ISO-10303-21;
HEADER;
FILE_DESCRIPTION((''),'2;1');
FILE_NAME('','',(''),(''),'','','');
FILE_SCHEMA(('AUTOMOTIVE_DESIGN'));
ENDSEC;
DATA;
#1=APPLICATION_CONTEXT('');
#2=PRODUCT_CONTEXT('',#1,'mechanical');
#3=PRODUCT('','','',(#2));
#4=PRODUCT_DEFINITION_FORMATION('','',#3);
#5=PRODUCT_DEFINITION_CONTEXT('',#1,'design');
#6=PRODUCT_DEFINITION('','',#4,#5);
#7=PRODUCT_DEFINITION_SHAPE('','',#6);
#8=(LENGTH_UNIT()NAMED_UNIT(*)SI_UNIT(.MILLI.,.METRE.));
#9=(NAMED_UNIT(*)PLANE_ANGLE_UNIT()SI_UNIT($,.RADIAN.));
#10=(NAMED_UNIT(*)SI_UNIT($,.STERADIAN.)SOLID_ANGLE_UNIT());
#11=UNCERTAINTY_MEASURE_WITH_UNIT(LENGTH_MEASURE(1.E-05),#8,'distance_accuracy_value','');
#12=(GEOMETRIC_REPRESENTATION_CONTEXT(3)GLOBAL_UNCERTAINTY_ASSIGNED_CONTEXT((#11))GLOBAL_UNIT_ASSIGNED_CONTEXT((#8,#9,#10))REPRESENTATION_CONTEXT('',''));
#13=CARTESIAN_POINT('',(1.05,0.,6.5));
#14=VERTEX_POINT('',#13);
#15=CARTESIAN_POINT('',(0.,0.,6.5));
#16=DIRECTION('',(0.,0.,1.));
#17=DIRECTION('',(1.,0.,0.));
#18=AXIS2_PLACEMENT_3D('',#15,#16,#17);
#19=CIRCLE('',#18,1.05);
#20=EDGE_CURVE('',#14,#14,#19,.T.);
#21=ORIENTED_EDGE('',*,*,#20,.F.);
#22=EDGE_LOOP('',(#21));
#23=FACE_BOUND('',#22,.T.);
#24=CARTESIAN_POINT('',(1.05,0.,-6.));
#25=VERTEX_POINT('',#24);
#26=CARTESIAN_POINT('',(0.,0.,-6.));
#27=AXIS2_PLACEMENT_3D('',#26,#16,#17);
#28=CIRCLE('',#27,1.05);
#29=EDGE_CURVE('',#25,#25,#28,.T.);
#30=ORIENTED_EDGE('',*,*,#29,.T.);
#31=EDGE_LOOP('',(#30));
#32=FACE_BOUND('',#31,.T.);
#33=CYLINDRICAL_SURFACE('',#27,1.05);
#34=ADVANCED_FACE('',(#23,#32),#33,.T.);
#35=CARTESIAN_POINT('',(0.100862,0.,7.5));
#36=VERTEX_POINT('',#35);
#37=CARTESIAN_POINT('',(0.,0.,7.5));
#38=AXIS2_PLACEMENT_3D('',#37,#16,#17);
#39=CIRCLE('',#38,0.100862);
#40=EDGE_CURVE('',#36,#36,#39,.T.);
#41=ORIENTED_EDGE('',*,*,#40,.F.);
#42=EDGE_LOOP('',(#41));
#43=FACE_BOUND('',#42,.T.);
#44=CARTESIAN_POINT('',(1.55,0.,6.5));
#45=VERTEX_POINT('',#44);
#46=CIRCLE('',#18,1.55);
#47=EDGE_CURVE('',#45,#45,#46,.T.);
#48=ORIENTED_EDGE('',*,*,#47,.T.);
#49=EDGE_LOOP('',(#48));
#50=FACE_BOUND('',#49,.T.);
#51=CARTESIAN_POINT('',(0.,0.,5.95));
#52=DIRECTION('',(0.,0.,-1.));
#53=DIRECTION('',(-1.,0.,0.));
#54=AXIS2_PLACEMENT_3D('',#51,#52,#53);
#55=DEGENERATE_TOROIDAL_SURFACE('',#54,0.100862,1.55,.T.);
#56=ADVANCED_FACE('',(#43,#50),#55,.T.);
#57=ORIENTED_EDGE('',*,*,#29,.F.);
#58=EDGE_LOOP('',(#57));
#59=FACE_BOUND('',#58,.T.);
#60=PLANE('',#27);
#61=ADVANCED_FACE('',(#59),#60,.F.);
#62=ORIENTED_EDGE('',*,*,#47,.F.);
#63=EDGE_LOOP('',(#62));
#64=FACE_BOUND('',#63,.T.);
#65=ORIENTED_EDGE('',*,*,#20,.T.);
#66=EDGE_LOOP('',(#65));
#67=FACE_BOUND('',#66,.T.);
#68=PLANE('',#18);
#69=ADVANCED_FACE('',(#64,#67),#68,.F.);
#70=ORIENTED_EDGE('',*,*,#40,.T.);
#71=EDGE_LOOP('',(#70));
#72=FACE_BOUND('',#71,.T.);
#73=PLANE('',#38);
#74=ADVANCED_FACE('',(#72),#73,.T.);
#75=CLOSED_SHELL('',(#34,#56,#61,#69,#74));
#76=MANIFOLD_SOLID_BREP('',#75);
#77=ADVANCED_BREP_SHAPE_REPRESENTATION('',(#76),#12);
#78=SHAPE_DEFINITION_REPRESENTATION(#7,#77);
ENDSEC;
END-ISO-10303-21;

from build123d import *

# Parameters (mm, degrees)
DODANIE_WYCI_GNI_CIE1_DEPTH      = 6.5
DODANIE_WYCI_GNI_CIE1_DEPTH_BACK = 6
SZKIC1_R                         = 1.05
SZKIC2_R                         = 1.55
DODANIE_WYCI_GNI_CIE2_DEPTH      = 1
ZAOKR_GLENIE1_R                  = 1.55


with BuildPart() as part:
    # Szkic1 → Dodanie-wyciągnięcie1 (new, two sides: drawn at the far end of the back side and taken through both)
    with BuildSketch(Plane.XY.offset(-DODANIE_WYCI_GNI_CIE1_DEPTH_BACK)):
        Circle(SZKIC1_R)
    extrude(amount=DODANIE_WYCI_GNI_CIE1_DEPTH + DODANIE_WYCI_GNI_CIE1_DEPTH_BACK)

    # Szkic2 → Dodanie-wyciągnięcie2 (add)
    with BuildSketch(Plane.XY.offset(6.5)):
        Circle(SZKIC2_R)
    extrude(amount=DODANIE_WYCI_GNI_CIE2_DEPTH)

    # Zaokrąglenie1
    # the kernel refuses this fillet: 1.55 mm, written as the material it takes off along each edge
    with BuildSketch(Plane(origin=(0, 0, 7.5), x_dir=(1, 0, 0), z_dir=(0, -1, 0))) as zaokr_glenie1_piece_1:
        with BuildLine():
            CenterArc((0.100862325, -1.55), ZAOKR_GLENIE1_R, 20.783559596, 69.216440404)
            Line((0.100862325, 0), (0.100862325, 0.031))
            Line((0.100862325, 0.031), (1.55, 0.031))
            Line((1.55, 0.031), (1.581, 0))
            ThreePointArc((1.581, 0), (1.581, -0.5), (1.578982753, -0.989))
            Line((1.578982753, -0.989), (1.55, -1))
        make_face()
    revolve(axis=Axis((0, 0, 7.5), (0, 0, 1)), mode=Mode.SUBTRACT)


solid = part.part
